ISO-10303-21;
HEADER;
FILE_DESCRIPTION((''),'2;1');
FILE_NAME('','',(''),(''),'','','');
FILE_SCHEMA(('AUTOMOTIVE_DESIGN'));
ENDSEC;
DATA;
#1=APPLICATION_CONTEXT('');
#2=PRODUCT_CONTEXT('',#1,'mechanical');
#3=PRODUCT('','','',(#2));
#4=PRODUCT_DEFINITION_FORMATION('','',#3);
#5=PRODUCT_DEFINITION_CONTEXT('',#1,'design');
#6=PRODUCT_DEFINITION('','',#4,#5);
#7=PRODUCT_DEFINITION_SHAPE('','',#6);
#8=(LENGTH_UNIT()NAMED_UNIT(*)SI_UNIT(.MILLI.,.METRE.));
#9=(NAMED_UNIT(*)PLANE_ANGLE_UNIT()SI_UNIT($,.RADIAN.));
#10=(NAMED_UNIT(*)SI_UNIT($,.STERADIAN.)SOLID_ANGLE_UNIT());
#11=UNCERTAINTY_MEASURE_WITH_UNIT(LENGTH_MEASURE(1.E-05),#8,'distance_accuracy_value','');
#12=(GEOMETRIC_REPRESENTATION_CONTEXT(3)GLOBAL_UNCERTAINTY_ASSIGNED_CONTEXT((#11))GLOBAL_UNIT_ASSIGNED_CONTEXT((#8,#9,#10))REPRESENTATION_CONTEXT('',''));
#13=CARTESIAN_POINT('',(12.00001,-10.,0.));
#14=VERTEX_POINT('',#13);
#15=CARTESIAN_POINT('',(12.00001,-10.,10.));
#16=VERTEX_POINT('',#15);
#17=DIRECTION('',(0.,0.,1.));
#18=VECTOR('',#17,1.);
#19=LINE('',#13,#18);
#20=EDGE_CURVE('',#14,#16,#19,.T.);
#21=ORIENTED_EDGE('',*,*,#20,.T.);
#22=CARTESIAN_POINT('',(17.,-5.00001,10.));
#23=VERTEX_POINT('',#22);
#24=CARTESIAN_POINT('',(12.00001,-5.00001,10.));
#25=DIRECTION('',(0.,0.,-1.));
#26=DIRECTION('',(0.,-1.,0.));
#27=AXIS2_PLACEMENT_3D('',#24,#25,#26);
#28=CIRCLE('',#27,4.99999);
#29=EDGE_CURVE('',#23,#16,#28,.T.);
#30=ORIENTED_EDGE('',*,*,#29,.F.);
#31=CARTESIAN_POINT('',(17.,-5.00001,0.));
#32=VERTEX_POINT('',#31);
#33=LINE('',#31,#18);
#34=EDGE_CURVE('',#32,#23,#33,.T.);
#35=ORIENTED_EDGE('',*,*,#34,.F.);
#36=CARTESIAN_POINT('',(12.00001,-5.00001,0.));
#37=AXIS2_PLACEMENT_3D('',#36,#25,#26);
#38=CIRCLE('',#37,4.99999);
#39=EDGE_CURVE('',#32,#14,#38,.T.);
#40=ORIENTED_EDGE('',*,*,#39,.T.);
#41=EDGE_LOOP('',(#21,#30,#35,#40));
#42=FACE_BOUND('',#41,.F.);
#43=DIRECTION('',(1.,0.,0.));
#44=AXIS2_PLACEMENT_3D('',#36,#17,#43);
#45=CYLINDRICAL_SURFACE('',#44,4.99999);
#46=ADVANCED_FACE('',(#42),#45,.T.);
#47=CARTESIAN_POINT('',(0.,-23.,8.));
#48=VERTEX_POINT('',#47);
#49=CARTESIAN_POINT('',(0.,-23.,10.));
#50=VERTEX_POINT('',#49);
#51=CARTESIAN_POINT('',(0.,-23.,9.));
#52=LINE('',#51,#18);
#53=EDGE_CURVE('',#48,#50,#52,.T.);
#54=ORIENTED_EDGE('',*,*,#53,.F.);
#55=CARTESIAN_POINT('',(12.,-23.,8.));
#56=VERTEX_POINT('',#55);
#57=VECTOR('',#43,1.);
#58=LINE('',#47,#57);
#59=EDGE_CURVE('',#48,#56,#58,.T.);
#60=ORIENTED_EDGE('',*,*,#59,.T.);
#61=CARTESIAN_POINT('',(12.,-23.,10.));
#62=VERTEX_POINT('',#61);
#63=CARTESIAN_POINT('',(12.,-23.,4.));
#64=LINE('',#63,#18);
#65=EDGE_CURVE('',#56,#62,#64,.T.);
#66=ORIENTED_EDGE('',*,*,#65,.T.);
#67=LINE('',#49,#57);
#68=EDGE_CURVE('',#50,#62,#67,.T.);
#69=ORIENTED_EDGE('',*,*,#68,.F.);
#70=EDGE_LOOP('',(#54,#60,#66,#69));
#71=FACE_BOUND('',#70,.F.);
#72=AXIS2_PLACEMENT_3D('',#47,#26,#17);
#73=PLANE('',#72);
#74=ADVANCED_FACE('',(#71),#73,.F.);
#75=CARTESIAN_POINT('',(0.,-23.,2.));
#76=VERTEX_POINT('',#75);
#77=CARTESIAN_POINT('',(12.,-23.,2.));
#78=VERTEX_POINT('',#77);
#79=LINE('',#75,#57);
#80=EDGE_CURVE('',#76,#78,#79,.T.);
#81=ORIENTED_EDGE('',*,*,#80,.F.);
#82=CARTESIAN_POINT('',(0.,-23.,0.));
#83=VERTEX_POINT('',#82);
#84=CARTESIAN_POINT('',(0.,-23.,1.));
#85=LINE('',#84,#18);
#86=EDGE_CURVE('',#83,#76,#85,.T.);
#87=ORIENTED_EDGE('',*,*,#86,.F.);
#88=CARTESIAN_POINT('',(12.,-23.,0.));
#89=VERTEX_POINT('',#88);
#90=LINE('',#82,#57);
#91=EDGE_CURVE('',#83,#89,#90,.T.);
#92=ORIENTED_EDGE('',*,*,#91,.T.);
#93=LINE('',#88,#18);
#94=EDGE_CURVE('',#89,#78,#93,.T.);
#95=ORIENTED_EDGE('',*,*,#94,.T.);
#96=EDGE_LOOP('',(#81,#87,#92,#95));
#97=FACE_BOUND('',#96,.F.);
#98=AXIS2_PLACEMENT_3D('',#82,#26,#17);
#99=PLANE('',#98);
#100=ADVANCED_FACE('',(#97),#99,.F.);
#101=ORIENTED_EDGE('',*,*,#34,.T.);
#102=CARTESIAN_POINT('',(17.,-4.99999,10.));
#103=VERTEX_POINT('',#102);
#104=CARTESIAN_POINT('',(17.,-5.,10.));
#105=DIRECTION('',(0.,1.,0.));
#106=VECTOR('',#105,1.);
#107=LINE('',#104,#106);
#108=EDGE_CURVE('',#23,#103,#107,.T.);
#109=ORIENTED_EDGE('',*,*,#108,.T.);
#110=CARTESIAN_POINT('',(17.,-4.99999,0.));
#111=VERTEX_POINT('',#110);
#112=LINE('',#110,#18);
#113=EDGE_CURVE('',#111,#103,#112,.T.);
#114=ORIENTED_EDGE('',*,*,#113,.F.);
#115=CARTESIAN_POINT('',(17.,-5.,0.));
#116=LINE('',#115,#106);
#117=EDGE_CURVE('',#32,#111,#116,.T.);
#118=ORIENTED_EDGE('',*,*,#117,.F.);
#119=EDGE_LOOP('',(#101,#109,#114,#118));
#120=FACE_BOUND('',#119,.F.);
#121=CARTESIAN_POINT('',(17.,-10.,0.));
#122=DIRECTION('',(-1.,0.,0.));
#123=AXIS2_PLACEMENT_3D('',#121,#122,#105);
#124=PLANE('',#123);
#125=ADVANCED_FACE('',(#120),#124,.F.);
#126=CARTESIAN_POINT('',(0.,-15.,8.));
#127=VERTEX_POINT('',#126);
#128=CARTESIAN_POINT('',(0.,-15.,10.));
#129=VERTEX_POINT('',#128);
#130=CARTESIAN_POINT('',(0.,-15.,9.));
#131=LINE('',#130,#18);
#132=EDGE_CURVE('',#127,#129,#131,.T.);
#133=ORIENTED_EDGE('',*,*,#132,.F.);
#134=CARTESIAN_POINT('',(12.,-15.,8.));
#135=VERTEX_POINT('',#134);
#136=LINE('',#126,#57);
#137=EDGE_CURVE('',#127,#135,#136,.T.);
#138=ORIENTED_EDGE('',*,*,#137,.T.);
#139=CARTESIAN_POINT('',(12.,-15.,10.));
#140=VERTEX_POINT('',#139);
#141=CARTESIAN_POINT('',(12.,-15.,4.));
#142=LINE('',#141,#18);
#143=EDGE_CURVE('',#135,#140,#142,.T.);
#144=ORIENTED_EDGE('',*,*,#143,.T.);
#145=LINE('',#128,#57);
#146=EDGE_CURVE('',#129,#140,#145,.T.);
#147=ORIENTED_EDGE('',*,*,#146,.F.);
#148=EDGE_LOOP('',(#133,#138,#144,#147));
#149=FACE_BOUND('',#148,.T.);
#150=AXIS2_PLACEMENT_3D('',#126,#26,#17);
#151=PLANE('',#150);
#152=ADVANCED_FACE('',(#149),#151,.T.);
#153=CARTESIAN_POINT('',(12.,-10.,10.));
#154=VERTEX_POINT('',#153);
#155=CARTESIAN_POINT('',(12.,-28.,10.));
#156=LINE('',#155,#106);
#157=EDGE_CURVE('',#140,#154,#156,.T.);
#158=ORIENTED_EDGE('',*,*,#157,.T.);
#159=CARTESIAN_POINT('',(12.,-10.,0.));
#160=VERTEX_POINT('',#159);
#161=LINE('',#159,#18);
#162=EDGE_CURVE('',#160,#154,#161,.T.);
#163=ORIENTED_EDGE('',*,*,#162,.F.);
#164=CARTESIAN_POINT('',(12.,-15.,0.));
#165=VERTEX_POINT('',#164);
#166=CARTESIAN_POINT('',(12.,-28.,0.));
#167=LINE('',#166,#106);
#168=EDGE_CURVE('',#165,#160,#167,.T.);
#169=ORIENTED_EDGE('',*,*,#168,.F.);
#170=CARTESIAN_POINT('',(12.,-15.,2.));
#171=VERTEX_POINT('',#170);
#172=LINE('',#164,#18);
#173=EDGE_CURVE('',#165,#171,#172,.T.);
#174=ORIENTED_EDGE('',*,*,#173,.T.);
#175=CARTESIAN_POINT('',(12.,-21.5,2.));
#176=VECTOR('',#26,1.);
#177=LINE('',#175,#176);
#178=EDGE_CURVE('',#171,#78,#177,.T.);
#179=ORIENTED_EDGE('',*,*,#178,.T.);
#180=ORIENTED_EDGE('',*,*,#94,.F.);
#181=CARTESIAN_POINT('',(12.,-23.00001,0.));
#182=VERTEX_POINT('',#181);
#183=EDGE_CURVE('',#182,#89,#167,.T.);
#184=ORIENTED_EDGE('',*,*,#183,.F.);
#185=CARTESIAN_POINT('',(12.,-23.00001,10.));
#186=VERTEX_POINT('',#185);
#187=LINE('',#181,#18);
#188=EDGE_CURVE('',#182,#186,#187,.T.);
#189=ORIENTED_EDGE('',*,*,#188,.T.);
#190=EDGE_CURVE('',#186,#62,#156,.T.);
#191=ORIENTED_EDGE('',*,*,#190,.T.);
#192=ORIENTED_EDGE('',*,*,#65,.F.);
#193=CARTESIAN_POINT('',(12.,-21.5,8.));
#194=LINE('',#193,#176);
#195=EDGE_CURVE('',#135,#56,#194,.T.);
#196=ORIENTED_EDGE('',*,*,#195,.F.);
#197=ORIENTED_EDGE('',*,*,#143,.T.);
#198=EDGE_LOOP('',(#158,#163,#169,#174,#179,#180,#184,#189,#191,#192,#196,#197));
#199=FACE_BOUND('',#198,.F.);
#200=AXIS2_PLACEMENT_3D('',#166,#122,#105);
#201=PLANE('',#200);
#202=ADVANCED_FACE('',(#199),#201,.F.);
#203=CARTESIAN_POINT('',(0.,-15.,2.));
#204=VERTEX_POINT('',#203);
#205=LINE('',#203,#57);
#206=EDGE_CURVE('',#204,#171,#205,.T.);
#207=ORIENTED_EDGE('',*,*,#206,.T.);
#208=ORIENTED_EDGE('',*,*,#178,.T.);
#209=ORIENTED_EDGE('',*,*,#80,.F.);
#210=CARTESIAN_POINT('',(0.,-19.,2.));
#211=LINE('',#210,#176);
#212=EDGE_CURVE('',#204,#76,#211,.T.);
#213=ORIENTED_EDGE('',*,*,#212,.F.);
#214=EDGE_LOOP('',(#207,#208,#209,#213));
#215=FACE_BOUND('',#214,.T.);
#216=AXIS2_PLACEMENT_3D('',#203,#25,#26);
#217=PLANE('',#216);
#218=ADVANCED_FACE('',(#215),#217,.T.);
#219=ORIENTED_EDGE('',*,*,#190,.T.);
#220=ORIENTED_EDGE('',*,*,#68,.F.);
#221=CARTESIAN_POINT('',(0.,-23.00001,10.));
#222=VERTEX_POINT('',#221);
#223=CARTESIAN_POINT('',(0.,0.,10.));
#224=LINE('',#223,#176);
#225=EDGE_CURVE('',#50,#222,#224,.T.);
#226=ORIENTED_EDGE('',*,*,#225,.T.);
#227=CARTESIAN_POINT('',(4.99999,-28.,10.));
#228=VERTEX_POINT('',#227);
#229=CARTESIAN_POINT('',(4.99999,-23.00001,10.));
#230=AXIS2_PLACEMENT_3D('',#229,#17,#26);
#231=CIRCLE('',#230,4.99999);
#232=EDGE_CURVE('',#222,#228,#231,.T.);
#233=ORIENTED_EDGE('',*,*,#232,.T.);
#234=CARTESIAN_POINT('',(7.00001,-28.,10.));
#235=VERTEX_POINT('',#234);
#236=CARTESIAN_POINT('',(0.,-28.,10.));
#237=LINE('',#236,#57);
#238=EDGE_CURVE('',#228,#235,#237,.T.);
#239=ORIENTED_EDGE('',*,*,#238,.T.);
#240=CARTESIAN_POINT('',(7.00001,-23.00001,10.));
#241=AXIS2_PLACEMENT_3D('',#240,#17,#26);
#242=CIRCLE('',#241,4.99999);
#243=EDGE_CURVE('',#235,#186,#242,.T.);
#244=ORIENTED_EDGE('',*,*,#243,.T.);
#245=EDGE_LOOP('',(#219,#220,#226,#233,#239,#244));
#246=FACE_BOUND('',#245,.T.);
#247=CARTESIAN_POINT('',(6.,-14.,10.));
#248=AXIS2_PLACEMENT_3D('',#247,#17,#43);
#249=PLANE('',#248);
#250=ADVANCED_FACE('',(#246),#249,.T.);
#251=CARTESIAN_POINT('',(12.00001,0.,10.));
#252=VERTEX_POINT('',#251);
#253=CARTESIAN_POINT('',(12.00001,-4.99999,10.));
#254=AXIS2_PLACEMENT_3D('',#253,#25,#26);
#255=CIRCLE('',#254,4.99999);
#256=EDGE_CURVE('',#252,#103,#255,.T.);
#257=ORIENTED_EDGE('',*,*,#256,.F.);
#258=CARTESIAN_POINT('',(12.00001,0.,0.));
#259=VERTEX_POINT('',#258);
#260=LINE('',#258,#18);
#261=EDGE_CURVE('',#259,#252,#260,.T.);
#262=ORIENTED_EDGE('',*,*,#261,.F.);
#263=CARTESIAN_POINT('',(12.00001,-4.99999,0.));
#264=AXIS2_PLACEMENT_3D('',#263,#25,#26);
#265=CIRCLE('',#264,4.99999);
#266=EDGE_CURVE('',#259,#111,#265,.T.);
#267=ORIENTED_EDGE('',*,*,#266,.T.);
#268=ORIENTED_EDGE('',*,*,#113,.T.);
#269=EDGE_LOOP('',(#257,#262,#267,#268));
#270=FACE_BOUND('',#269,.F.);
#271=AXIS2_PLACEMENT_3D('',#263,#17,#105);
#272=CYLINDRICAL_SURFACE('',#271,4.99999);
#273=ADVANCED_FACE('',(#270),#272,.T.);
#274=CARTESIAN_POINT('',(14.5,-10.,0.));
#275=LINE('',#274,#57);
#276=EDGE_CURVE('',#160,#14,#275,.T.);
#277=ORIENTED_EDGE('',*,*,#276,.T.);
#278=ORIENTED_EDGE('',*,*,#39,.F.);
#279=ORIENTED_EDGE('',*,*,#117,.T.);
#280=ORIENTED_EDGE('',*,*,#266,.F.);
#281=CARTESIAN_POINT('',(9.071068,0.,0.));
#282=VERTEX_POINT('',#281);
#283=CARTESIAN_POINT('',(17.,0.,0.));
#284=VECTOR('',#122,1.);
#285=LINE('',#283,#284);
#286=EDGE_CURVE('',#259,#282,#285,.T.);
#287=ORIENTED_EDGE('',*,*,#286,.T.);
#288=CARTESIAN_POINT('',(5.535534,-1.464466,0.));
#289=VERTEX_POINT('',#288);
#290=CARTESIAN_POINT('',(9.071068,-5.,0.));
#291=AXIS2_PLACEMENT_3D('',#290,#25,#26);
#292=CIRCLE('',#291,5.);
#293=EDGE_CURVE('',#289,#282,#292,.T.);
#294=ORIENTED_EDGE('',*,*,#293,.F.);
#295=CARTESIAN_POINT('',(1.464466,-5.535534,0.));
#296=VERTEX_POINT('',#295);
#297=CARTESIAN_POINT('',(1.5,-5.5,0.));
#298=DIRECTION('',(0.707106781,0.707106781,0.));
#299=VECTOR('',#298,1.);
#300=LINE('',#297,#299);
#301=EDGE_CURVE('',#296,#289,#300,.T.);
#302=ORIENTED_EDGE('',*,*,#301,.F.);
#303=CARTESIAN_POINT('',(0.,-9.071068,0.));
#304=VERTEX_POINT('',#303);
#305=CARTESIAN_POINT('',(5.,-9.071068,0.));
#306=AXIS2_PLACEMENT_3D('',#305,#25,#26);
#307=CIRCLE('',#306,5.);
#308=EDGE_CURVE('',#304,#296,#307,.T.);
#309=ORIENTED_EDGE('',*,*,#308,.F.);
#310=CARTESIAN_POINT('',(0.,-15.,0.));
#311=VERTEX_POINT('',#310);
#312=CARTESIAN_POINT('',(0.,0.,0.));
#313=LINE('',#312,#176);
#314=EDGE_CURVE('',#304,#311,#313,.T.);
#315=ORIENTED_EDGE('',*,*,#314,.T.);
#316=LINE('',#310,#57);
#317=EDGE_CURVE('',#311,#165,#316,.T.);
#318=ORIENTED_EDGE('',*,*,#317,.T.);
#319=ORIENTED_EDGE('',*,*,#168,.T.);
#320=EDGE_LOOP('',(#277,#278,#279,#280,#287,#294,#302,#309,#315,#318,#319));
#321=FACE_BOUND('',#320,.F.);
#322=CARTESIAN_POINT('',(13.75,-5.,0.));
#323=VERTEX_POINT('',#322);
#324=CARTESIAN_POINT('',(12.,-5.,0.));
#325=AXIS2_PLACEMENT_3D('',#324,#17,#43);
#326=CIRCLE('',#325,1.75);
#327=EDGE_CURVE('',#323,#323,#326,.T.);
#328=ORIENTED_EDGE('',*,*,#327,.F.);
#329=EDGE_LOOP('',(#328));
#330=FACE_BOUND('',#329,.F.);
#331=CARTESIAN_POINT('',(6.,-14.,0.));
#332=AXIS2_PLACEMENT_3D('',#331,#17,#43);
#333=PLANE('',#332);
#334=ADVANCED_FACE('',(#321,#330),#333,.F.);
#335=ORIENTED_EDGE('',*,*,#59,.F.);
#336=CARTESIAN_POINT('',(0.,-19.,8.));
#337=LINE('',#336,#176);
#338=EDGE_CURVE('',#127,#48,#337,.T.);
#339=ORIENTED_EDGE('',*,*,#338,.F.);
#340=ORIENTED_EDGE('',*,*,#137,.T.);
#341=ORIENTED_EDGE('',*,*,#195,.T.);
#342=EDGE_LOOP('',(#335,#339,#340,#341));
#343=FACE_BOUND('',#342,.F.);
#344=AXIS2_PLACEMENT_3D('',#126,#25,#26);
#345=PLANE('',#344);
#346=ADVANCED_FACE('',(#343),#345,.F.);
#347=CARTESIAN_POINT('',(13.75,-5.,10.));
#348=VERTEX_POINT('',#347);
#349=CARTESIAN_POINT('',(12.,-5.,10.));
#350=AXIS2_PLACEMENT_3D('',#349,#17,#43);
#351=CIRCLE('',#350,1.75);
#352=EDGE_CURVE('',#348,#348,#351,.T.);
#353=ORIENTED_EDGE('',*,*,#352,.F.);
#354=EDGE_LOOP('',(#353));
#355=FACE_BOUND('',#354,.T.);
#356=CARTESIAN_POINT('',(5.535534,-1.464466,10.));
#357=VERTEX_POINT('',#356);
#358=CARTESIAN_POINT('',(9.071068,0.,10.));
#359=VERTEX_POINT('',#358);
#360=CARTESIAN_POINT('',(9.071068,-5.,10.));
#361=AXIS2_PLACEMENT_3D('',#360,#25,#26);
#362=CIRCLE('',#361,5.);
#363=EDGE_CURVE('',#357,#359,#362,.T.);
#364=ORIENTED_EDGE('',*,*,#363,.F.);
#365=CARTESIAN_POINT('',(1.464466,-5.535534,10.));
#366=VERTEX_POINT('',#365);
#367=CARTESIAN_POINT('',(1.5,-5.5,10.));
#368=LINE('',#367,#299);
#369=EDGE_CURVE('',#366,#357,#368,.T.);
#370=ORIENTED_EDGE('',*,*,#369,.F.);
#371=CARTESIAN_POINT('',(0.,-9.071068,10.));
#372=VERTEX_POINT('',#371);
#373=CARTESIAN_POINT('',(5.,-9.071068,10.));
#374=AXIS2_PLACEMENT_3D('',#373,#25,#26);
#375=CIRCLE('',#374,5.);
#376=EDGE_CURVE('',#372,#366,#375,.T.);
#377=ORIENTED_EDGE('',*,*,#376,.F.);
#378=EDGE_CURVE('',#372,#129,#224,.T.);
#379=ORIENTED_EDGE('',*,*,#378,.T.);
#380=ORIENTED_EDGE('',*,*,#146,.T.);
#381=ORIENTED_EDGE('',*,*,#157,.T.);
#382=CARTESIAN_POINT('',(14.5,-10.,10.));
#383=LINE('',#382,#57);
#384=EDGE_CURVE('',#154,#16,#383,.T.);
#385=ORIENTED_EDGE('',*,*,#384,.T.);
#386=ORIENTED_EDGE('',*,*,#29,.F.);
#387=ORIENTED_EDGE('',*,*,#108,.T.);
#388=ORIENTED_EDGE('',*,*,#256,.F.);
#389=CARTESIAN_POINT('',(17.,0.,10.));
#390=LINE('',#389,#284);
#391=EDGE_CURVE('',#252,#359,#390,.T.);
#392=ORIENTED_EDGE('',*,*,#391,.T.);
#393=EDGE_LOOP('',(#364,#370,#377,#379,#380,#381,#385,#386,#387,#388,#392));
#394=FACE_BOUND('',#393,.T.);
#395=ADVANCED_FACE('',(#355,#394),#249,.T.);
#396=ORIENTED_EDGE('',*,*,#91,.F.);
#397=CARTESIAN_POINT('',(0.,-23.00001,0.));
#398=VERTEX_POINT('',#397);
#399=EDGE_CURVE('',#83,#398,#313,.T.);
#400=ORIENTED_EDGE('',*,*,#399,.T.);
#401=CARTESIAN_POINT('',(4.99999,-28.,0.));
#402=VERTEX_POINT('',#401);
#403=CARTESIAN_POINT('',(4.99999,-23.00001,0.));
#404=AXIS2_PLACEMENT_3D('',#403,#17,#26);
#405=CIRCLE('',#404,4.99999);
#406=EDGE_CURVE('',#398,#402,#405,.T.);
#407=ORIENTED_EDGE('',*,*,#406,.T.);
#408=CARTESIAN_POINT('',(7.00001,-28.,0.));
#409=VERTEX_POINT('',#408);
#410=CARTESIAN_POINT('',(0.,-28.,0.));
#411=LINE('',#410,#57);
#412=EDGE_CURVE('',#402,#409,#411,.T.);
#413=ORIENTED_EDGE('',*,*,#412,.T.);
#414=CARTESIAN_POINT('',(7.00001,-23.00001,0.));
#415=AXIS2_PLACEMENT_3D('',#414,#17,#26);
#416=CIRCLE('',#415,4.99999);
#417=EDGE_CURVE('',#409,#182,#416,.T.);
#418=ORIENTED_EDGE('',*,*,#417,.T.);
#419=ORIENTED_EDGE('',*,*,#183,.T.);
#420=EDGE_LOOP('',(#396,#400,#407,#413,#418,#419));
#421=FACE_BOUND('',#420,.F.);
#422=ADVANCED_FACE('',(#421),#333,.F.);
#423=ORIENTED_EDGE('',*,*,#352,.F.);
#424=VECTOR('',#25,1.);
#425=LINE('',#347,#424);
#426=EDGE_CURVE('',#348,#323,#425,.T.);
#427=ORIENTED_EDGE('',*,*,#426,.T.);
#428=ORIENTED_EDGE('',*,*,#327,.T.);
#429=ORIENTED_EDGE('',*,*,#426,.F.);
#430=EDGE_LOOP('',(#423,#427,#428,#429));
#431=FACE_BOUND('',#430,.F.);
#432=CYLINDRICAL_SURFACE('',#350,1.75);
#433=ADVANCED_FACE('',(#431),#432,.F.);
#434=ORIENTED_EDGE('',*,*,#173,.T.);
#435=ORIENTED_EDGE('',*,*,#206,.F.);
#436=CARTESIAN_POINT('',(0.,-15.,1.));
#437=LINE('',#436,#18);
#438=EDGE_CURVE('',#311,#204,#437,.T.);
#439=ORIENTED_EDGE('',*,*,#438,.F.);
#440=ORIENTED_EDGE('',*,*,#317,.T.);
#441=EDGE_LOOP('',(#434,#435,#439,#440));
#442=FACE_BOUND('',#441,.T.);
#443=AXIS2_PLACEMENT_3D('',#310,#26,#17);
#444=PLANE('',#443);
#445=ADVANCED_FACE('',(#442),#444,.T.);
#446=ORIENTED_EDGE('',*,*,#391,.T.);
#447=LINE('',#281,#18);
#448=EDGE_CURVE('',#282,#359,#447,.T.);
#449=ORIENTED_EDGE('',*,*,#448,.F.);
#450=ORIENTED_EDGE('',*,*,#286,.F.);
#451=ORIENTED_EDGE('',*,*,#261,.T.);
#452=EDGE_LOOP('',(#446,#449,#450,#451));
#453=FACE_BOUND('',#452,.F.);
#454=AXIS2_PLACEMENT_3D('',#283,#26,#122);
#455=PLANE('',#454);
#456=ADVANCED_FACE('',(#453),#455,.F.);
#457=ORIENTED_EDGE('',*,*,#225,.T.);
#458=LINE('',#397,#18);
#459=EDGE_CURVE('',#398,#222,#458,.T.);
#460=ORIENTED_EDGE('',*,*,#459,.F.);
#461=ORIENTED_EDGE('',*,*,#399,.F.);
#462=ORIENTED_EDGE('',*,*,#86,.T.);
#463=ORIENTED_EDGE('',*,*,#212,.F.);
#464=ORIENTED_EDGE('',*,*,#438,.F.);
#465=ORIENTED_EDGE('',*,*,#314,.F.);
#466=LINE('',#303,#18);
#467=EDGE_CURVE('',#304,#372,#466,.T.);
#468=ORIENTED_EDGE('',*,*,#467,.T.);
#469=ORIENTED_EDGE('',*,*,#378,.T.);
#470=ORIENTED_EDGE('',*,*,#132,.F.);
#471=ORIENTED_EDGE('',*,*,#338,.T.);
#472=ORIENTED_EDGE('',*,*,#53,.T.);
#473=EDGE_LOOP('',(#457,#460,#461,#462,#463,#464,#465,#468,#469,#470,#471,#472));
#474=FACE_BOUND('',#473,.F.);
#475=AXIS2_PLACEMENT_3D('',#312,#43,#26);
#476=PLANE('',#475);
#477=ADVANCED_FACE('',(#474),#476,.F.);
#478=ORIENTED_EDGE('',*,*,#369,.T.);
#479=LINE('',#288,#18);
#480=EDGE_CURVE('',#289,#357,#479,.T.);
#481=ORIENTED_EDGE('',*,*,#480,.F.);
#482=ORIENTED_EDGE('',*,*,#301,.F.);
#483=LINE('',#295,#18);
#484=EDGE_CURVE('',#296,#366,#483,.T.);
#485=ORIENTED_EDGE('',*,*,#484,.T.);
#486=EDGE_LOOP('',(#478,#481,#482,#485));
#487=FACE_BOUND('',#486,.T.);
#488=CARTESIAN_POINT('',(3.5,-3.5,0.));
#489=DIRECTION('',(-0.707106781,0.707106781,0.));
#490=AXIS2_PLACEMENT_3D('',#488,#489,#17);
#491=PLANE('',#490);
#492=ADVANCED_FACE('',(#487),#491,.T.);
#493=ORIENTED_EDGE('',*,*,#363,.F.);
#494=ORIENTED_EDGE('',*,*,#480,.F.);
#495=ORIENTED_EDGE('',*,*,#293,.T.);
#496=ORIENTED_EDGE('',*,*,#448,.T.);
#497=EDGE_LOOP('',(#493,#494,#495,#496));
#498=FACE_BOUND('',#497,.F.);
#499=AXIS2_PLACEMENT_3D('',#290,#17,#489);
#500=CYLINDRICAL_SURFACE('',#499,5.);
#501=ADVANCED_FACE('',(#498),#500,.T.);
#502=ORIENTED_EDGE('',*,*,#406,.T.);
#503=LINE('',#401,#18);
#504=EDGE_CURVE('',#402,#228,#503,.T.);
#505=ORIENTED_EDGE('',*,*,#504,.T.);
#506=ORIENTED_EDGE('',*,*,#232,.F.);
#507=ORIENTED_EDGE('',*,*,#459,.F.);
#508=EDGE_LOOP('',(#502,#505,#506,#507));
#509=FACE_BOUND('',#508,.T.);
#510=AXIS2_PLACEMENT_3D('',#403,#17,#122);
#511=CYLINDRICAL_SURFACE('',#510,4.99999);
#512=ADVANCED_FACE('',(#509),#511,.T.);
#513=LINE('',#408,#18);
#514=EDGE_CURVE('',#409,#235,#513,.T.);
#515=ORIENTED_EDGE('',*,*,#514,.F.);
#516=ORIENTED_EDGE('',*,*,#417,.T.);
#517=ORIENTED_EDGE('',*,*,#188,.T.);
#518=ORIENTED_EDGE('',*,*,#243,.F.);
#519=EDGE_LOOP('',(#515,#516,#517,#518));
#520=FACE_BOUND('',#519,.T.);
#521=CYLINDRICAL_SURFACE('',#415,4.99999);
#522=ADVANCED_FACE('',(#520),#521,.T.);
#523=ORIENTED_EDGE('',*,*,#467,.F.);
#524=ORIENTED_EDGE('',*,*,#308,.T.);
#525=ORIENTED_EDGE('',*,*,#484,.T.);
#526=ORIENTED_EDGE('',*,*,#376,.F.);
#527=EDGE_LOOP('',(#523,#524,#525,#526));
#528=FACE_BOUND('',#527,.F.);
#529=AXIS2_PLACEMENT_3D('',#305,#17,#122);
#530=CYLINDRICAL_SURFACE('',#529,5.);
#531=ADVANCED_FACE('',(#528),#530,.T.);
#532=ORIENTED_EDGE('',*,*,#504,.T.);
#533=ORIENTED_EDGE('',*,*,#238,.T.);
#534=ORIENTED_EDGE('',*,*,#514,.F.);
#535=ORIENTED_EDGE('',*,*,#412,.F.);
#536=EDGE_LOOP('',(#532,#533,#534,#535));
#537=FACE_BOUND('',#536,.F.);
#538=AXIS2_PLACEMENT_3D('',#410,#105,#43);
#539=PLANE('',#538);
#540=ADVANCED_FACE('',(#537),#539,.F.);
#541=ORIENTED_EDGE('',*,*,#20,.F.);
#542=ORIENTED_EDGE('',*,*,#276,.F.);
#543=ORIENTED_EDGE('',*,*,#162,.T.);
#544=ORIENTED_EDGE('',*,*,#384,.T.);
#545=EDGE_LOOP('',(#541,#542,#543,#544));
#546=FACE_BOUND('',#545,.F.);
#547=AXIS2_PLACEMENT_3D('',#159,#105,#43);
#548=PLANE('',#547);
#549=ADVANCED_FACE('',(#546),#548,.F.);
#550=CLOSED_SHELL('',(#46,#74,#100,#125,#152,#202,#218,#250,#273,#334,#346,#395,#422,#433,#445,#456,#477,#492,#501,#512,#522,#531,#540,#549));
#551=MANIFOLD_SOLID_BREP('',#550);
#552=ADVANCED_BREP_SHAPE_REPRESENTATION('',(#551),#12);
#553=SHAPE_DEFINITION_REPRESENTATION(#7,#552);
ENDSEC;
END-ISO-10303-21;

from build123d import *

# Parameters (mm, degrees)
F0_W     = 5
F0_H     = 10
F1_DEPTH = 10
F2_R     = 1.75
F3_DEPTH = 25
F4_W     = 8
F4_H     = 2
F5_DEPTH = 25
F6_R     = 4.99999
F7_SIZE  = 7
F8_R     = 5


# Not quite as in the source:
# - a fillet or chamfer is up to 0.001 mm smaller than in the source, because OpenCascade refuses the exact size


with BuildPart() as f1:
    # F0 (on Top) → F1 (new body)
    with BuildSketch(Plane.XY):
        Polygon((12, 0), (0, 0), (0, -28), (12, -28), (12, -10), align=None)
        with Locations((14.5, -5)):
            Rectangle(F0_W, F0_H)
    extrude(amount=F1_DEPTH)

    # F2 (on face) → F3 (cut)
    with BuildSketch(Plane.XY.offset(10)):
        with Locations((12, -5)):
            Circle(F2_R)
    extrude(amount=-F3_DEPTH, mode=Mode.SUBTRACT)

    # F4 (on face) → F5 (cut)
    with BuildSketch(Plane(origin=(0, 0, 0), x_dir=(0, -1, 0), z_dir=(-1, 0, 0))):
        with Locations((19, 1)):
            Rectangle(F4_W, F4_H)
        with Locations((19, 9)):
            Rectangle(F4_W, F4_H)
    extrude(amount=-F5_DEPTH, mode=Mode.SUBTRACT)

    # F6 (radius 5 in the source; OpenCascade refuses exactly that, so slightly less here)
    f6_edges = [f1.edges().sort_by_distance(p)[0] for p in [
        (12, -28, 5),
        (0, -28, 5),
        (17, 0, 5),
        (17, -10, 5),
    ]]
    fillet(f6_edges, radius=F6_R)

    # F7
    f7_edges = [f1.edges().sort_by_distance(p)[0] for p in [
        (0, 0, 5),
    ]]
    chamfer(f7_edges, length=F7_SIZE)

    # F8
    f8_edges = [f1.edges().sort_by_distance(p)[0] for p in [
        (7, 0, 5),
        (0, -7, 5),
    ]]
    fillet(f8_edges, radius=F8_R)


solid = f1.part
